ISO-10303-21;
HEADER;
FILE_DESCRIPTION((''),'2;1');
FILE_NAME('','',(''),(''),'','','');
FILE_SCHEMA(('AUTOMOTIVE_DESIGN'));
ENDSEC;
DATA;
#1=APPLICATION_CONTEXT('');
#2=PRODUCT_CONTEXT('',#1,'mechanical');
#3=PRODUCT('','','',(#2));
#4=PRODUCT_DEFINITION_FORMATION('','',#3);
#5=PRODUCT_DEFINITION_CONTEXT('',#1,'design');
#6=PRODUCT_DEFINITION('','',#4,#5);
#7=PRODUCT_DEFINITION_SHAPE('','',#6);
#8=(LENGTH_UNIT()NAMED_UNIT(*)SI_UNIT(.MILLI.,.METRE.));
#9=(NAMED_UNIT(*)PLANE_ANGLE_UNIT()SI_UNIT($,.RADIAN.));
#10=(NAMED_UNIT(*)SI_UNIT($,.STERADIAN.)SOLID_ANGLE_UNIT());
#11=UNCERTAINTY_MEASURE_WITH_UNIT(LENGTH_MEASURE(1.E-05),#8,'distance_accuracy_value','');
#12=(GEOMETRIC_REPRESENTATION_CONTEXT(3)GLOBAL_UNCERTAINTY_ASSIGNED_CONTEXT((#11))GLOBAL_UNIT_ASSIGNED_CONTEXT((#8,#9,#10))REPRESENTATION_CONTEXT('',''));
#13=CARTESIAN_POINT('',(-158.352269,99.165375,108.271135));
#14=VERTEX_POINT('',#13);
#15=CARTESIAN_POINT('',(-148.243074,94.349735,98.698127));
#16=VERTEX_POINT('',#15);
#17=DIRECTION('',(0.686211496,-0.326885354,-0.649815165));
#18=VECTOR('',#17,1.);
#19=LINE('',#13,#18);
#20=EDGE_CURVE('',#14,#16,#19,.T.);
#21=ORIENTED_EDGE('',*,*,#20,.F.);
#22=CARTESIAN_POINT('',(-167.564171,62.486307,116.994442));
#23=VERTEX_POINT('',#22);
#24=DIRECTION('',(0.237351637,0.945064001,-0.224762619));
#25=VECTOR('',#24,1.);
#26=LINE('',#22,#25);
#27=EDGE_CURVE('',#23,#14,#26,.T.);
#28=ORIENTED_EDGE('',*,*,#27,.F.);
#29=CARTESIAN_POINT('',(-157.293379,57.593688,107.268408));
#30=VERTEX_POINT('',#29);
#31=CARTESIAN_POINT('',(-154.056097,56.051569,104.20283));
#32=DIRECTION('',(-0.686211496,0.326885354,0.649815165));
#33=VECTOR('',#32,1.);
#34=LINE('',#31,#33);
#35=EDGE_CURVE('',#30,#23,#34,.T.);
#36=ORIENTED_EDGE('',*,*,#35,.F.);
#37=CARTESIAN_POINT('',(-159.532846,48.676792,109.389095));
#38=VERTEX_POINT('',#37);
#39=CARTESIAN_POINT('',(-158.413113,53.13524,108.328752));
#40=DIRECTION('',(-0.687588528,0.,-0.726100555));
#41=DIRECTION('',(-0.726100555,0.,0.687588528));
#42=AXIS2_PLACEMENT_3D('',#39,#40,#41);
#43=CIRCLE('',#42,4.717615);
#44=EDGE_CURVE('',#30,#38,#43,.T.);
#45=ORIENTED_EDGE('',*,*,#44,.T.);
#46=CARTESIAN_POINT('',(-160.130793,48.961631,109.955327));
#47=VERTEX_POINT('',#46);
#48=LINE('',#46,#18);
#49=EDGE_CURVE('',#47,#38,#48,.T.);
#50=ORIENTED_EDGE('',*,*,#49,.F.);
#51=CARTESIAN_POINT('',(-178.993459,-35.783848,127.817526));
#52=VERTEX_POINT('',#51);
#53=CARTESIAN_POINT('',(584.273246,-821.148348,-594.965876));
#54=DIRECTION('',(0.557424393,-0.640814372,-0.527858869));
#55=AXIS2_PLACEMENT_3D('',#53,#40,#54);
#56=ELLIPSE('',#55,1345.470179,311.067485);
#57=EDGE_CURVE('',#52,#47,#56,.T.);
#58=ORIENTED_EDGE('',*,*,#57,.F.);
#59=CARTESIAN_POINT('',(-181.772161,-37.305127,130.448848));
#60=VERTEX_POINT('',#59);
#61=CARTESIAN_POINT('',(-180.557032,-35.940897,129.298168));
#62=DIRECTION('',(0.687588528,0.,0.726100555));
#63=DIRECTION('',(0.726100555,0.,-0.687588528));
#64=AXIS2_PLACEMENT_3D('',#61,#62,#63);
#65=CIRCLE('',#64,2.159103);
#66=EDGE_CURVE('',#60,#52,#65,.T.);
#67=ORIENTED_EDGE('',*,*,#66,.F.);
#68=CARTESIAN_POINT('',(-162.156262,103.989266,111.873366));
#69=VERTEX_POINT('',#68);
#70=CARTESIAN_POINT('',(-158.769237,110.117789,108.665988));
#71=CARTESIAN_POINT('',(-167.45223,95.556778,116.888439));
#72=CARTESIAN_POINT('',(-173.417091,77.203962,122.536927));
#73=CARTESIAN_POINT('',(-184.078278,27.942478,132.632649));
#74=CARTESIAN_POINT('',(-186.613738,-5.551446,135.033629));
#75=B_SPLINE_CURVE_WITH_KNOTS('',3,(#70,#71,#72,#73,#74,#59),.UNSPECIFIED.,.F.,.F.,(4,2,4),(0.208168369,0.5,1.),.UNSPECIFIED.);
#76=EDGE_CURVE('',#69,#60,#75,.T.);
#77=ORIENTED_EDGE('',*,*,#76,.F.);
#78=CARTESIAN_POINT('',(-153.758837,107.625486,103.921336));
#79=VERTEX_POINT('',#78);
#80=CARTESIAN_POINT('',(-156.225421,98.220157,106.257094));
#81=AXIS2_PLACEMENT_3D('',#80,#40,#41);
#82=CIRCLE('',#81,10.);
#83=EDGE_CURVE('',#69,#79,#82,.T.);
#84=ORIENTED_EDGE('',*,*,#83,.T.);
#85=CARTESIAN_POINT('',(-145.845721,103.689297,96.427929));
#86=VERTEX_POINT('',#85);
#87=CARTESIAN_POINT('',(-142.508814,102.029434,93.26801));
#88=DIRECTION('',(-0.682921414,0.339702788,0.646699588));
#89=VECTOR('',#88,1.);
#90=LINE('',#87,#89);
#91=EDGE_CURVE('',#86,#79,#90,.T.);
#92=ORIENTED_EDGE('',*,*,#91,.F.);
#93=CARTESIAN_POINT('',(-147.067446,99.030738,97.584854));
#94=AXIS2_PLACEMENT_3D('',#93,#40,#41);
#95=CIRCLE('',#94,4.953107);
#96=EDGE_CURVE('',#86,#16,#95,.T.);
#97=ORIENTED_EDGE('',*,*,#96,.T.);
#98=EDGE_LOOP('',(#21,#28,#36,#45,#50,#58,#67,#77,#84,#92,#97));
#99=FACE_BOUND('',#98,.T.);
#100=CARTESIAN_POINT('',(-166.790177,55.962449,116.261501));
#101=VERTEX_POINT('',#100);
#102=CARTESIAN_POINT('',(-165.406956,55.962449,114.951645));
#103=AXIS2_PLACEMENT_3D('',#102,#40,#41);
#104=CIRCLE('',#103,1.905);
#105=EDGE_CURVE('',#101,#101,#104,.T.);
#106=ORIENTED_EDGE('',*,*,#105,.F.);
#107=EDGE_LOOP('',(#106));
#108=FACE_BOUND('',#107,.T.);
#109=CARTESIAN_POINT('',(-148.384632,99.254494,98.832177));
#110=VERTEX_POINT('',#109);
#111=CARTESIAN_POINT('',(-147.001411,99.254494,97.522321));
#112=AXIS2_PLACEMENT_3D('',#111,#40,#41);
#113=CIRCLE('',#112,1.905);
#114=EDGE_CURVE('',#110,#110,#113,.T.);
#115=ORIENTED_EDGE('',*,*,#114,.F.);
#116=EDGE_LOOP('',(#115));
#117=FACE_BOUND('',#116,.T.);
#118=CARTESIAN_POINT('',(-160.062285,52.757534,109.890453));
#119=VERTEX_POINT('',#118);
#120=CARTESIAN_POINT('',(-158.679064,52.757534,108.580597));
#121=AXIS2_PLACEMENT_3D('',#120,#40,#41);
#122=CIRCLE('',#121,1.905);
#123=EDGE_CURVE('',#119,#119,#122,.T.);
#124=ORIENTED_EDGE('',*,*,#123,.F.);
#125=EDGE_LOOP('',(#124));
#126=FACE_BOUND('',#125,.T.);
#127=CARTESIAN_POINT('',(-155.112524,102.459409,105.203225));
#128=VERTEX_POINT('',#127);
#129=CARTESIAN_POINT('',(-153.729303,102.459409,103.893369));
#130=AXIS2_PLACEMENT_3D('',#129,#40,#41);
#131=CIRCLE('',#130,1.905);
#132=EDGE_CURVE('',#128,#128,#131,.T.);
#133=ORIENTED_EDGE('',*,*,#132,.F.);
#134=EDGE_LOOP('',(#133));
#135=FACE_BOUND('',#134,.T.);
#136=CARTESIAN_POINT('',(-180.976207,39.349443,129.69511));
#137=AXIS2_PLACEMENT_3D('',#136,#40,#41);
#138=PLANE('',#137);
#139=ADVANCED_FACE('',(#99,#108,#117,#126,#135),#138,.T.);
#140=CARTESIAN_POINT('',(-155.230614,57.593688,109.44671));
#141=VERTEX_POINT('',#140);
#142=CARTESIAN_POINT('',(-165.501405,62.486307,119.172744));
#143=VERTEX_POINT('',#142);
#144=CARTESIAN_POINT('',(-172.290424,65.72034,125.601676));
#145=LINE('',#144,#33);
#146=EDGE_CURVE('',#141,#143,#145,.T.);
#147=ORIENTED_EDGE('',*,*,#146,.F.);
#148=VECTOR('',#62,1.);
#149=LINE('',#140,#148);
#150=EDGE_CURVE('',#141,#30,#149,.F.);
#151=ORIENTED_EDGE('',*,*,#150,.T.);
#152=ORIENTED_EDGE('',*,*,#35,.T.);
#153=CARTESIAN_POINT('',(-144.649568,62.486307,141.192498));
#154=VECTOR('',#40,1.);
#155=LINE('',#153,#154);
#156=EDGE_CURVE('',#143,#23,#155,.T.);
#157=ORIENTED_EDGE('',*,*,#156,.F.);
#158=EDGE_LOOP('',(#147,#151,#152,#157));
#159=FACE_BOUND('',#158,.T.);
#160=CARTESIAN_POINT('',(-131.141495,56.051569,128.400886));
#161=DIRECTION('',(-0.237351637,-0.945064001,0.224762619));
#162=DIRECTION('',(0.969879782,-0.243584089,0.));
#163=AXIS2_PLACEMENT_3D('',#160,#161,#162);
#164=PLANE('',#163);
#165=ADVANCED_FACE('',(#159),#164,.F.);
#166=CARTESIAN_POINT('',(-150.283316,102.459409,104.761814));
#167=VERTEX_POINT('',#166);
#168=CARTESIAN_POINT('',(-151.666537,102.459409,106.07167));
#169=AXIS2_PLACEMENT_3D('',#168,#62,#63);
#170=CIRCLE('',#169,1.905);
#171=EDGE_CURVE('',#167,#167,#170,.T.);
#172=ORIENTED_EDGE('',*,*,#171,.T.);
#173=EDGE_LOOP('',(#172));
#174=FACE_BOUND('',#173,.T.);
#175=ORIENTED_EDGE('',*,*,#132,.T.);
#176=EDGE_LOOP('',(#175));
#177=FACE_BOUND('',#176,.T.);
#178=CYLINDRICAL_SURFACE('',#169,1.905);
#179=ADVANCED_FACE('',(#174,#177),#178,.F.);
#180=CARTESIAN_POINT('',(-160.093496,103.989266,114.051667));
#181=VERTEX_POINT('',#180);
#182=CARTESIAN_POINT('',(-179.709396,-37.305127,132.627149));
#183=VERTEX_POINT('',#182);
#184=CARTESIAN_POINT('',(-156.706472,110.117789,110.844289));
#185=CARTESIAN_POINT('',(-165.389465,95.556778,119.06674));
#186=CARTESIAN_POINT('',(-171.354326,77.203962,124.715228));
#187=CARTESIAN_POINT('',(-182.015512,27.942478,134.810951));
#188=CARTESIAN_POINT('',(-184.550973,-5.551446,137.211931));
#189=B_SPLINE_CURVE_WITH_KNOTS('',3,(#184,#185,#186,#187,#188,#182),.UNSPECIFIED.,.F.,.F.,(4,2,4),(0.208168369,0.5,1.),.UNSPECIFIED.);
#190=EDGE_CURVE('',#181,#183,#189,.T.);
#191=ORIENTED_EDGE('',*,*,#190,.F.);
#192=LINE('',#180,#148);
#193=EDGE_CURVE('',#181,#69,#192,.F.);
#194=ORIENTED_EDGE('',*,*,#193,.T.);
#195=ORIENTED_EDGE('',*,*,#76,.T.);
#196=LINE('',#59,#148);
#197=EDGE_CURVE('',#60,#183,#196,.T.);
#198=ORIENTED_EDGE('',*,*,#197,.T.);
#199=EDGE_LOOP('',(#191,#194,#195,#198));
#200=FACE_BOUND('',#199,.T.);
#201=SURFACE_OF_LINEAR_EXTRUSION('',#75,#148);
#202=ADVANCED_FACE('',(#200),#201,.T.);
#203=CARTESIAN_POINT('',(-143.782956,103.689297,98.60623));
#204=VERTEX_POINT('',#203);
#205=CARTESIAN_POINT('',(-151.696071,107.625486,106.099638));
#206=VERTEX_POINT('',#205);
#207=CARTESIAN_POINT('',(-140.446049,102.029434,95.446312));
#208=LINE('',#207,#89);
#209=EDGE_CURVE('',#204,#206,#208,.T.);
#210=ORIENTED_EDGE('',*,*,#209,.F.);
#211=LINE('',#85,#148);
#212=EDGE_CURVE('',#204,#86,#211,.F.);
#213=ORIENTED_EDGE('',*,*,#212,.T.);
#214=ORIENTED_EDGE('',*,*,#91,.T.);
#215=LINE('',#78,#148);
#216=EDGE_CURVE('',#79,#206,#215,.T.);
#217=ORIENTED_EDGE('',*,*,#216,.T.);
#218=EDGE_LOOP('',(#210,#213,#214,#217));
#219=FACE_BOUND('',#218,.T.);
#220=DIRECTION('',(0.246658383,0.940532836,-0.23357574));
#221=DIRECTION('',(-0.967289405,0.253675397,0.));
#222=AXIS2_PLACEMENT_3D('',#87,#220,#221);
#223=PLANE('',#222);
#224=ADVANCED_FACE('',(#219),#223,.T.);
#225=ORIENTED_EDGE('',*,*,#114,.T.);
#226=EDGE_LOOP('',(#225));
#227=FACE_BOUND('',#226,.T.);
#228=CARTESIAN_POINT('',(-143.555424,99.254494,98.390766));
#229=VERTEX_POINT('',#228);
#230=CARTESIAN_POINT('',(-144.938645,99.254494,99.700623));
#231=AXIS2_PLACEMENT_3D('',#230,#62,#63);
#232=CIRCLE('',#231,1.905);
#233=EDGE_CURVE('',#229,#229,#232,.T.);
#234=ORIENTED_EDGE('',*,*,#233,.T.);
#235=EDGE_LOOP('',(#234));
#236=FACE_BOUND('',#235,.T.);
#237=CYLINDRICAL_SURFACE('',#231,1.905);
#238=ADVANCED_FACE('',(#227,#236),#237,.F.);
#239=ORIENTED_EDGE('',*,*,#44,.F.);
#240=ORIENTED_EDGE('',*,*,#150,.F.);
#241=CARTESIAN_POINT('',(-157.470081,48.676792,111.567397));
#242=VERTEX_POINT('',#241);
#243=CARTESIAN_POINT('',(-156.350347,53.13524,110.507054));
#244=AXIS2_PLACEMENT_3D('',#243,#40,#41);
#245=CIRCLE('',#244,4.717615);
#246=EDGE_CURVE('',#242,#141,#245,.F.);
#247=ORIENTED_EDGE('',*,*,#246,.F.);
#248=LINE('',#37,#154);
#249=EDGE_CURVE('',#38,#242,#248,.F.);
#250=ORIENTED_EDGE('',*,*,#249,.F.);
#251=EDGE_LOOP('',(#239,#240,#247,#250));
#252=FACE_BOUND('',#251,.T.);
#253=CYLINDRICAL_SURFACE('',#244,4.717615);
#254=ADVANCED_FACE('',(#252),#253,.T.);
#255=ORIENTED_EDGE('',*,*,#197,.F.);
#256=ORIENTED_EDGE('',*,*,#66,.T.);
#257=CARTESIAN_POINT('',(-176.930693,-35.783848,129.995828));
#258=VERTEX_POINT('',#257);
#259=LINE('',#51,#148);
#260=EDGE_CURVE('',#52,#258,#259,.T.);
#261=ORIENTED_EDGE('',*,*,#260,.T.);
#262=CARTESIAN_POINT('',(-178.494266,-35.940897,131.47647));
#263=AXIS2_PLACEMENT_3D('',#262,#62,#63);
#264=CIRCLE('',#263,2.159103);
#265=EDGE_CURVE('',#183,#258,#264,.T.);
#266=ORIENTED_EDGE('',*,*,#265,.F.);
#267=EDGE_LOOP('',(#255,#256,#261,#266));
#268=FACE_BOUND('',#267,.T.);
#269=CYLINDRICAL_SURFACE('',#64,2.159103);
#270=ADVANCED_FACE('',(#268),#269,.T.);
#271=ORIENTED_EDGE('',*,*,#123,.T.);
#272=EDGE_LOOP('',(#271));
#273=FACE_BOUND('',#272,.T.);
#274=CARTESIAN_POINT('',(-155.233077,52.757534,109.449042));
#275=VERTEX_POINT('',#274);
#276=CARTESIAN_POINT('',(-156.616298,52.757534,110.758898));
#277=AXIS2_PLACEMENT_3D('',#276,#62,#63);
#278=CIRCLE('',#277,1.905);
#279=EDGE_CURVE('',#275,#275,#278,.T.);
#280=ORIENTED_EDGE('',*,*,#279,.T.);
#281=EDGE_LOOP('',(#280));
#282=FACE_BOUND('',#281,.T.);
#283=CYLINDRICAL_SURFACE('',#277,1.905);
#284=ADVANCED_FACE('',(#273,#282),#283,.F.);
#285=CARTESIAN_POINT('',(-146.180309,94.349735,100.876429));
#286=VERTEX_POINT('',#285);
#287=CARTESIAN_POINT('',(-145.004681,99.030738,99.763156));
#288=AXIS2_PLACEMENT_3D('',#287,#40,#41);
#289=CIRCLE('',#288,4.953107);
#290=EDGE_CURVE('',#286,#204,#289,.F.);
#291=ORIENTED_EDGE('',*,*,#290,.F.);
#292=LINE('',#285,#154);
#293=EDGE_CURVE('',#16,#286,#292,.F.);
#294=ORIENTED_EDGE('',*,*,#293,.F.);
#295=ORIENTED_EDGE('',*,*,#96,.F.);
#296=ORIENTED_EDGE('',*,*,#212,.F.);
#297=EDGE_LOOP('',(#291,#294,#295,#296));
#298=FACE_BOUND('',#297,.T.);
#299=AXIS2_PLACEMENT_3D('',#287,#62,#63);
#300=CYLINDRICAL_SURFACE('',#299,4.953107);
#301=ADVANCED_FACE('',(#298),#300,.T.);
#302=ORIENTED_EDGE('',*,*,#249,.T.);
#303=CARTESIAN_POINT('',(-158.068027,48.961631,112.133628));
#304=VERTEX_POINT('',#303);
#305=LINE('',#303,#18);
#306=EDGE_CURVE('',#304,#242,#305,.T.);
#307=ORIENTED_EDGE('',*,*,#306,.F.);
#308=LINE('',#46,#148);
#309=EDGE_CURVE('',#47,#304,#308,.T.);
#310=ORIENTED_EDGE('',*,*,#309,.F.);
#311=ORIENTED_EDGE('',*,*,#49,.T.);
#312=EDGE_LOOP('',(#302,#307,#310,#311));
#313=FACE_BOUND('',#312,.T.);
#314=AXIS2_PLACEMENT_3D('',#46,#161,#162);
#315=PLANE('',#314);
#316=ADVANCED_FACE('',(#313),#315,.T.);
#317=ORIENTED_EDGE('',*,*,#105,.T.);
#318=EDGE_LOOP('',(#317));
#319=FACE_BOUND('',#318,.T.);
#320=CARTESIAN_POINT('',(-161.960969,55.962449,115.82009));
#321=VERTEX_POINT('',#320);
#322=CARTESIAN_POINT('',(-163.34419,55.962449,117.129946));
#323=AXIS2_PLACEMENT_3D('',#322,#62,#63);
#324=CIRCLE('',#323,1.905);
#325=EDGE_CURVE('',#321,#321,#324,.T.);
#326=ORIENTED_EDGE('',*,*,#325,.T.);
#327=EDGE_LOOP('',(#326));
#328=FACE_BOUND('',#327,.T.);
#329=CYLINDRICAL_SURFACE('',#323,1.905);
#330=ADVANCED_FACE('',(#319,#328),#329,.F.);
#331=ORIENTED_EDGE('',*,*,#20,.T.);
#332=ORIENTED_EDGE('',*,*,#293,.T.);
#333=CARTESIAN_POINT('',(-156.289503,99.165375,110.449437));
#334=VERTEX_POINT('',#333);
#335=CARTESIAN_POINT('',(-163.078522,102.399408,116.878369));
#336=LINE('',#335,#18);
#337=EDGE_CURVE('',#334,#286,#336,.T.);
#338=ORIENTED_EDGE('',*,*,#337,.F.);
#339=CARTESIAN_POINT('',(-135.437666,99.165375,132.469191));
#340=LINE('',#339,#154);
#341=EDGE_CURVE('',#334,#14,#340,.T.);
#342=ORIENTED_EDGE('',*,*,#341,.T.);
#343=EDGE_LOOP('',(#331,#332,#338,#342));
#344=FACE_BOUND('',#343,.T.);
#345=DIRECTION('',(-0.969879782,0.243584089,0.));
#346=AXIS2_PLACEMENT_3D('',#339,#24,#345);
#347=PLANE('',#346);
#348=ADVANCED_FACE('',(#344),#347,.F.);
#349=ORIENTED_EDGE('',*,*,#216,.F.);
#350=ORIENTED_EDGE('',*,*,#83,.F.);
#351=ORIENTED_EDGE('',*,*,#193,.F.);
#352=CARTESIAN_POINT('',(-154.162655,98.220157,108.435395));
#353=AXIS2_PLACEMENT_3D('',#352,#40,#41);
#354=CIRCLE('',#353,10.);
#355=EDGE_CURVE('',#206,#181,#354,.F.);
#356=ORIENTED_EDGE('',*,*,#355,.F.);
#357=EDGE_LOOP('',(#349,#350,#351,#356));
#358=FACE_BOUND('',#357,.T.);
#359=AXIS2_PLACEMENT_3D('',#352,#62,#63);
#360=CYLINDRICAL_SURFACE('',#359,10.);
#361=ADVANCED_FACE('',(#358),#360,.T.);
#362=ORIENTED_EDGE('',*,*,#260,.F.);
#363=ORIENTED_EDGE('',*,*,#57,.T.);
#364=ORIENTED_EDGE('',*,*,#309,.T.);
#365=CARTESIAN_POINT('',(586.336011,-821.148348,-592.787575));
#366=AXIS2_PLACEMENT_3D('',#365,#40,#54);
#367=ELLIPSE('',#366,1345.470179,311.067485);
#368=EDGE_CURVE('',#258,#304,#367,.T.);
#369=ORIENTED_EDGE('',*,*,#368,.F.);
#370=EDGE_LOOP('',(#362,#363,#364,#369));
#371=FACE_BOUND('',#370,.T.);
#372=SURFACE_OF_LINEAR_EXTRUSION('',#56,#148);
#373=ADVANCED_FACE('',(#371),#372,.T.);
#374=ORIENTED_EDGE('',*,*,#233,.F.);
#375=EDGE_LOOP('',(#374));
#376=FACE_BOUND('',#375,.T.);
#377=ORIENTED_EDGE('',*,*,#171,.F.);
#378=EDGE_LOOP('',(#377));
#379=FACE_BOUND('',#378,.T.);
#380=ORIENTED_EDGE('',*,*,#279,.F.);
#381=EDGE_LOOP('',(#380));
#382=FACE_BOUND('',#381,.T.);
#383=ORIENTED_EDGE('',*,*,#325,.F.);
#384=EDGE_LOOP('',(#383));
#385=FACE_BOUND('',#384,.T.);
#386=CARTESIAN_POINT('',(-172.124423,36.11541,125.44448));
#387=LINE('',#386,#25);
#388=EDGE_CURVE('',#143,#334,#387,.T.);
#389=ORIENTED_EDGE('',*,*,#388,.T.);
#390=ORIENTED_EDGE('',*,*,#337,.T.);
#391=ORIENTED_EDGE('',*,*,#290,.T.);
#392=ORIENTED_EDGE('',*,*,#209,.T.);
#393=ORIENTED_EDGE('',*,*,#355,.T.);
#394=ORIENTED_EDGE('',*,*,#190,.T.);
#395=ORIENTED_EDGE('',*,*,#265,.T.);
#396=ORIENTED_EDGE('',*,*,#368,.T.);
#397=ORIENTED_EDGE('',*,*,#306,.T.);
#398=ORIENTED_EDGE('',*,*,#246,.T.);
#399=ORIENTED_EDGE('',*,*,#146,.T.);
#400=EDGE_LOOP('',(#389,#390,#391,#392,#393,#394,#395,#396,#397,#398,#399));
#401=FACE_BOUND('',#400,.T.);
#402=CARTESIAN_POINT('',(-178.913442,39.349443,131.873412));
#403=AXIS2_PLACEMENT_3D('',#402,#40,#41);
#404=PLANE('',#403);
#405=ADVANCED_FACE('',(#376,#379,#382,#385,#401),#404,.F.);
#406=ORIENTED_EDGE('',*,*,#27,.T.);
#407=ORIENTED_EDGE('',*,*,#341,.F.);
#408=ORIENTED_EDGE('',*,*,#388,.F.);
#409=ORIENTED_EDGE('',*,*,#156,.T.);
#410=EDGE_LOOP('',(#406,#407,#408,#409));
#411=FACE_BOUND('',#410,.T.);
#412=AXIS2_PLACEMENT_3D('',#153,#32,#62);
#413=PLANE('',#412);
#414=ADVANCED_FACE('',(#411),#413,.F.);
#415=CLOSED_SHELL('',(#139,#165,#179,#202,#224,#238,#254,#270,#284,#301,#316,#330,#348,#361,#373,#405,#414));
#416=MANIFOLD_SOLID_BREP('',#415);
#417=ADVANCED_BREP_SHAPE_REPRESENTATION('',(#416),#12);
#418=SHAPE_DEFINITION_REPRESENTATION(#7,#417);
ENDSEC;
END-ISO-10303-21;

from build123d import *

# Parameters (mm, degrees)
BOSS_EXTRUDE1_DEPTH        = 3
CUT_EXTRUDE1_DEPTH         = 252.974914731
M3_5_CLEARANCE_HOLE1_D     = 3.81
M3_5_CLEARANCE_HOLE1_DEPTH = 33.326039541
FILLET3_R                  = 10
FILLET4_R                  = 4.953107
FILLET10_RADIUS            = 4.717615086
FILLET10_LENGTH            = 3


with BuildPart() as part:
    # Sketch1 → Boss-Extrude1 (new body)
    with BuildSketch(Plane(origin=(-18.747425911, 0, -19.797474517), x_dir=(0, 1, 0), z_dir=(0.6875885279992334, -2.359310851515896e-15, 0.7261005551325845))):
        with BuildLine():
            Line((47.134672347, 186.593127271), (102.029433509, 167.605742926))
            Line((102.029433509, 167.605742926), (110.11778873, 189.999917885))
            add(Edge.make_bspline(
                [(110.11778873, 189.999917885), (95.556778138, 201.958306819), (77.203961524, 210.173231356), (27.942477706, 224.856027605), (-5.55144569, 228.347913352), (-37.305127188, 221.679998311)],
                knots=[0.208168369, 0.208168369, 0.208168369, 0.208168369, 0.5, 0.5, 1, 1, 1, 1], degree=3))
            ThreePointArc((-37.305127188, 221.679998311), (-37.947282057, 219.208911383), (-35.783847857, 217.85311422))
            add(Edge.make_bspline(
                [(48.961630736, 191.875078834), (21.255996477, 223.260445978), (-35.783847857, 217.85311422)],
                knots=[3.106185015, 3.106185015, 3.106185015, 3.3708584, 3.3708584, 3.3708584], degree=2, weights=[1, 0.991256272, 1]))
            Line((48.961630736, 191.875078834), (47.134672347, 186.593127271))
        make_face()
    extrude(amount=-BOSS_EXTRUDE1_DEPTH)

    # Sketch2 → Cut-Extrude1 (cut, through all)
    with BuildSketch(Plane(origin=(-20.810191495, 0, -21.975776182), x_dir=(-0.7261005551325845, -2.234174129215775e-15, 0.6875885279992334), z_dir=(-0.6875885279992334, 2.3593108515158963e-15, -0.7261005551325845))):
        Polygon((170.822075884, 92.730636669), (183.50888872, 56.051568722), (202.112473576, 62.486306908), (189.42566074, 99.165374855), align=None)
    extrude(amount=-CUT_EXTRUDE1_DEPTH, mode=Mode.SUBTRACT)

    # M3.5 Clearance Hole1
    with Locations(Plane(origin=(-18.747425911, 0, -19.797474517), x_dir=(0.7261005551325845, 2.234174129215775e-15, -0.6875885279992334), z_dir=(0.6875885279992334, -2.3593108515158963e-15, 0.7261005551325845))):
        with Locations((-183.058820464, 102.459409082), (-199.141514485, 55.962449256), (-189.875728995, 52.757534495), (-173.793034975, 99.254494321)):
            Hole(M3_5_CLEARANCE_HOLE1_D / 2, depth=M3_5_CLEARANCE_HOLE1_DEPTH)

    # Fillet3
    fillet3_edges = [part.edges().sort_by_distance(p)[0] for p in [
        (-157.737854554, 110.11778873, 109.755138509),
    ]]
    fillet(fillet3_edges, radius=FILLET3_R)

    # Fillet4
    fillet4_edges = [part.edges().sort_by_distance(p)[0] for p in [
        (-141.477431685, 102.029433509, 94.357160713),
        (-143.812812831, 92.730636669, 96.568674357),
    ]]
    fillet(fillet4_edges, radius=FILLET4_R - 0.0001)  # a hair under: the kernel refuses the full size

    # Fillet10: full round fillet: the end face becomes a half cylinder, R = half its width
    fillet10_face = Plane((-154.144448336, 51.593120535, 106.352324843), x_dir=(-0.687588527999, 0, -0.726100555133), z_dir=(0.686211495613, -0.326885353607, -0.649815165171))  # on the end face: x along it, z out of the body
    fillet10_slab = fillet10_face.offset(-FILLET10_RADIUS / 2) * Box(FILLET10_LENGTH, 2 * FILLET10_RADIUS, FILLET10_RADIUS, mode=Mode.PRIVATE)  # the body's end, R deep
    fillet10_round = Plane((-157.38173004, 53.135239811, 109.417902669), x_dir=(0.686211495613, -0.326885353607, -0.649815165171), z_dir=(-0.687588527999, 0, -0.726100555133)) * Cylinder(FILLET10_RADIUS, FILLET10_LENGTH, mode=Mode.PRIVATE)  # its axis R under the face
    add(fillet10_slab - fillet10_round, mode=Mode.SUBTRACT)


solid = part.part
